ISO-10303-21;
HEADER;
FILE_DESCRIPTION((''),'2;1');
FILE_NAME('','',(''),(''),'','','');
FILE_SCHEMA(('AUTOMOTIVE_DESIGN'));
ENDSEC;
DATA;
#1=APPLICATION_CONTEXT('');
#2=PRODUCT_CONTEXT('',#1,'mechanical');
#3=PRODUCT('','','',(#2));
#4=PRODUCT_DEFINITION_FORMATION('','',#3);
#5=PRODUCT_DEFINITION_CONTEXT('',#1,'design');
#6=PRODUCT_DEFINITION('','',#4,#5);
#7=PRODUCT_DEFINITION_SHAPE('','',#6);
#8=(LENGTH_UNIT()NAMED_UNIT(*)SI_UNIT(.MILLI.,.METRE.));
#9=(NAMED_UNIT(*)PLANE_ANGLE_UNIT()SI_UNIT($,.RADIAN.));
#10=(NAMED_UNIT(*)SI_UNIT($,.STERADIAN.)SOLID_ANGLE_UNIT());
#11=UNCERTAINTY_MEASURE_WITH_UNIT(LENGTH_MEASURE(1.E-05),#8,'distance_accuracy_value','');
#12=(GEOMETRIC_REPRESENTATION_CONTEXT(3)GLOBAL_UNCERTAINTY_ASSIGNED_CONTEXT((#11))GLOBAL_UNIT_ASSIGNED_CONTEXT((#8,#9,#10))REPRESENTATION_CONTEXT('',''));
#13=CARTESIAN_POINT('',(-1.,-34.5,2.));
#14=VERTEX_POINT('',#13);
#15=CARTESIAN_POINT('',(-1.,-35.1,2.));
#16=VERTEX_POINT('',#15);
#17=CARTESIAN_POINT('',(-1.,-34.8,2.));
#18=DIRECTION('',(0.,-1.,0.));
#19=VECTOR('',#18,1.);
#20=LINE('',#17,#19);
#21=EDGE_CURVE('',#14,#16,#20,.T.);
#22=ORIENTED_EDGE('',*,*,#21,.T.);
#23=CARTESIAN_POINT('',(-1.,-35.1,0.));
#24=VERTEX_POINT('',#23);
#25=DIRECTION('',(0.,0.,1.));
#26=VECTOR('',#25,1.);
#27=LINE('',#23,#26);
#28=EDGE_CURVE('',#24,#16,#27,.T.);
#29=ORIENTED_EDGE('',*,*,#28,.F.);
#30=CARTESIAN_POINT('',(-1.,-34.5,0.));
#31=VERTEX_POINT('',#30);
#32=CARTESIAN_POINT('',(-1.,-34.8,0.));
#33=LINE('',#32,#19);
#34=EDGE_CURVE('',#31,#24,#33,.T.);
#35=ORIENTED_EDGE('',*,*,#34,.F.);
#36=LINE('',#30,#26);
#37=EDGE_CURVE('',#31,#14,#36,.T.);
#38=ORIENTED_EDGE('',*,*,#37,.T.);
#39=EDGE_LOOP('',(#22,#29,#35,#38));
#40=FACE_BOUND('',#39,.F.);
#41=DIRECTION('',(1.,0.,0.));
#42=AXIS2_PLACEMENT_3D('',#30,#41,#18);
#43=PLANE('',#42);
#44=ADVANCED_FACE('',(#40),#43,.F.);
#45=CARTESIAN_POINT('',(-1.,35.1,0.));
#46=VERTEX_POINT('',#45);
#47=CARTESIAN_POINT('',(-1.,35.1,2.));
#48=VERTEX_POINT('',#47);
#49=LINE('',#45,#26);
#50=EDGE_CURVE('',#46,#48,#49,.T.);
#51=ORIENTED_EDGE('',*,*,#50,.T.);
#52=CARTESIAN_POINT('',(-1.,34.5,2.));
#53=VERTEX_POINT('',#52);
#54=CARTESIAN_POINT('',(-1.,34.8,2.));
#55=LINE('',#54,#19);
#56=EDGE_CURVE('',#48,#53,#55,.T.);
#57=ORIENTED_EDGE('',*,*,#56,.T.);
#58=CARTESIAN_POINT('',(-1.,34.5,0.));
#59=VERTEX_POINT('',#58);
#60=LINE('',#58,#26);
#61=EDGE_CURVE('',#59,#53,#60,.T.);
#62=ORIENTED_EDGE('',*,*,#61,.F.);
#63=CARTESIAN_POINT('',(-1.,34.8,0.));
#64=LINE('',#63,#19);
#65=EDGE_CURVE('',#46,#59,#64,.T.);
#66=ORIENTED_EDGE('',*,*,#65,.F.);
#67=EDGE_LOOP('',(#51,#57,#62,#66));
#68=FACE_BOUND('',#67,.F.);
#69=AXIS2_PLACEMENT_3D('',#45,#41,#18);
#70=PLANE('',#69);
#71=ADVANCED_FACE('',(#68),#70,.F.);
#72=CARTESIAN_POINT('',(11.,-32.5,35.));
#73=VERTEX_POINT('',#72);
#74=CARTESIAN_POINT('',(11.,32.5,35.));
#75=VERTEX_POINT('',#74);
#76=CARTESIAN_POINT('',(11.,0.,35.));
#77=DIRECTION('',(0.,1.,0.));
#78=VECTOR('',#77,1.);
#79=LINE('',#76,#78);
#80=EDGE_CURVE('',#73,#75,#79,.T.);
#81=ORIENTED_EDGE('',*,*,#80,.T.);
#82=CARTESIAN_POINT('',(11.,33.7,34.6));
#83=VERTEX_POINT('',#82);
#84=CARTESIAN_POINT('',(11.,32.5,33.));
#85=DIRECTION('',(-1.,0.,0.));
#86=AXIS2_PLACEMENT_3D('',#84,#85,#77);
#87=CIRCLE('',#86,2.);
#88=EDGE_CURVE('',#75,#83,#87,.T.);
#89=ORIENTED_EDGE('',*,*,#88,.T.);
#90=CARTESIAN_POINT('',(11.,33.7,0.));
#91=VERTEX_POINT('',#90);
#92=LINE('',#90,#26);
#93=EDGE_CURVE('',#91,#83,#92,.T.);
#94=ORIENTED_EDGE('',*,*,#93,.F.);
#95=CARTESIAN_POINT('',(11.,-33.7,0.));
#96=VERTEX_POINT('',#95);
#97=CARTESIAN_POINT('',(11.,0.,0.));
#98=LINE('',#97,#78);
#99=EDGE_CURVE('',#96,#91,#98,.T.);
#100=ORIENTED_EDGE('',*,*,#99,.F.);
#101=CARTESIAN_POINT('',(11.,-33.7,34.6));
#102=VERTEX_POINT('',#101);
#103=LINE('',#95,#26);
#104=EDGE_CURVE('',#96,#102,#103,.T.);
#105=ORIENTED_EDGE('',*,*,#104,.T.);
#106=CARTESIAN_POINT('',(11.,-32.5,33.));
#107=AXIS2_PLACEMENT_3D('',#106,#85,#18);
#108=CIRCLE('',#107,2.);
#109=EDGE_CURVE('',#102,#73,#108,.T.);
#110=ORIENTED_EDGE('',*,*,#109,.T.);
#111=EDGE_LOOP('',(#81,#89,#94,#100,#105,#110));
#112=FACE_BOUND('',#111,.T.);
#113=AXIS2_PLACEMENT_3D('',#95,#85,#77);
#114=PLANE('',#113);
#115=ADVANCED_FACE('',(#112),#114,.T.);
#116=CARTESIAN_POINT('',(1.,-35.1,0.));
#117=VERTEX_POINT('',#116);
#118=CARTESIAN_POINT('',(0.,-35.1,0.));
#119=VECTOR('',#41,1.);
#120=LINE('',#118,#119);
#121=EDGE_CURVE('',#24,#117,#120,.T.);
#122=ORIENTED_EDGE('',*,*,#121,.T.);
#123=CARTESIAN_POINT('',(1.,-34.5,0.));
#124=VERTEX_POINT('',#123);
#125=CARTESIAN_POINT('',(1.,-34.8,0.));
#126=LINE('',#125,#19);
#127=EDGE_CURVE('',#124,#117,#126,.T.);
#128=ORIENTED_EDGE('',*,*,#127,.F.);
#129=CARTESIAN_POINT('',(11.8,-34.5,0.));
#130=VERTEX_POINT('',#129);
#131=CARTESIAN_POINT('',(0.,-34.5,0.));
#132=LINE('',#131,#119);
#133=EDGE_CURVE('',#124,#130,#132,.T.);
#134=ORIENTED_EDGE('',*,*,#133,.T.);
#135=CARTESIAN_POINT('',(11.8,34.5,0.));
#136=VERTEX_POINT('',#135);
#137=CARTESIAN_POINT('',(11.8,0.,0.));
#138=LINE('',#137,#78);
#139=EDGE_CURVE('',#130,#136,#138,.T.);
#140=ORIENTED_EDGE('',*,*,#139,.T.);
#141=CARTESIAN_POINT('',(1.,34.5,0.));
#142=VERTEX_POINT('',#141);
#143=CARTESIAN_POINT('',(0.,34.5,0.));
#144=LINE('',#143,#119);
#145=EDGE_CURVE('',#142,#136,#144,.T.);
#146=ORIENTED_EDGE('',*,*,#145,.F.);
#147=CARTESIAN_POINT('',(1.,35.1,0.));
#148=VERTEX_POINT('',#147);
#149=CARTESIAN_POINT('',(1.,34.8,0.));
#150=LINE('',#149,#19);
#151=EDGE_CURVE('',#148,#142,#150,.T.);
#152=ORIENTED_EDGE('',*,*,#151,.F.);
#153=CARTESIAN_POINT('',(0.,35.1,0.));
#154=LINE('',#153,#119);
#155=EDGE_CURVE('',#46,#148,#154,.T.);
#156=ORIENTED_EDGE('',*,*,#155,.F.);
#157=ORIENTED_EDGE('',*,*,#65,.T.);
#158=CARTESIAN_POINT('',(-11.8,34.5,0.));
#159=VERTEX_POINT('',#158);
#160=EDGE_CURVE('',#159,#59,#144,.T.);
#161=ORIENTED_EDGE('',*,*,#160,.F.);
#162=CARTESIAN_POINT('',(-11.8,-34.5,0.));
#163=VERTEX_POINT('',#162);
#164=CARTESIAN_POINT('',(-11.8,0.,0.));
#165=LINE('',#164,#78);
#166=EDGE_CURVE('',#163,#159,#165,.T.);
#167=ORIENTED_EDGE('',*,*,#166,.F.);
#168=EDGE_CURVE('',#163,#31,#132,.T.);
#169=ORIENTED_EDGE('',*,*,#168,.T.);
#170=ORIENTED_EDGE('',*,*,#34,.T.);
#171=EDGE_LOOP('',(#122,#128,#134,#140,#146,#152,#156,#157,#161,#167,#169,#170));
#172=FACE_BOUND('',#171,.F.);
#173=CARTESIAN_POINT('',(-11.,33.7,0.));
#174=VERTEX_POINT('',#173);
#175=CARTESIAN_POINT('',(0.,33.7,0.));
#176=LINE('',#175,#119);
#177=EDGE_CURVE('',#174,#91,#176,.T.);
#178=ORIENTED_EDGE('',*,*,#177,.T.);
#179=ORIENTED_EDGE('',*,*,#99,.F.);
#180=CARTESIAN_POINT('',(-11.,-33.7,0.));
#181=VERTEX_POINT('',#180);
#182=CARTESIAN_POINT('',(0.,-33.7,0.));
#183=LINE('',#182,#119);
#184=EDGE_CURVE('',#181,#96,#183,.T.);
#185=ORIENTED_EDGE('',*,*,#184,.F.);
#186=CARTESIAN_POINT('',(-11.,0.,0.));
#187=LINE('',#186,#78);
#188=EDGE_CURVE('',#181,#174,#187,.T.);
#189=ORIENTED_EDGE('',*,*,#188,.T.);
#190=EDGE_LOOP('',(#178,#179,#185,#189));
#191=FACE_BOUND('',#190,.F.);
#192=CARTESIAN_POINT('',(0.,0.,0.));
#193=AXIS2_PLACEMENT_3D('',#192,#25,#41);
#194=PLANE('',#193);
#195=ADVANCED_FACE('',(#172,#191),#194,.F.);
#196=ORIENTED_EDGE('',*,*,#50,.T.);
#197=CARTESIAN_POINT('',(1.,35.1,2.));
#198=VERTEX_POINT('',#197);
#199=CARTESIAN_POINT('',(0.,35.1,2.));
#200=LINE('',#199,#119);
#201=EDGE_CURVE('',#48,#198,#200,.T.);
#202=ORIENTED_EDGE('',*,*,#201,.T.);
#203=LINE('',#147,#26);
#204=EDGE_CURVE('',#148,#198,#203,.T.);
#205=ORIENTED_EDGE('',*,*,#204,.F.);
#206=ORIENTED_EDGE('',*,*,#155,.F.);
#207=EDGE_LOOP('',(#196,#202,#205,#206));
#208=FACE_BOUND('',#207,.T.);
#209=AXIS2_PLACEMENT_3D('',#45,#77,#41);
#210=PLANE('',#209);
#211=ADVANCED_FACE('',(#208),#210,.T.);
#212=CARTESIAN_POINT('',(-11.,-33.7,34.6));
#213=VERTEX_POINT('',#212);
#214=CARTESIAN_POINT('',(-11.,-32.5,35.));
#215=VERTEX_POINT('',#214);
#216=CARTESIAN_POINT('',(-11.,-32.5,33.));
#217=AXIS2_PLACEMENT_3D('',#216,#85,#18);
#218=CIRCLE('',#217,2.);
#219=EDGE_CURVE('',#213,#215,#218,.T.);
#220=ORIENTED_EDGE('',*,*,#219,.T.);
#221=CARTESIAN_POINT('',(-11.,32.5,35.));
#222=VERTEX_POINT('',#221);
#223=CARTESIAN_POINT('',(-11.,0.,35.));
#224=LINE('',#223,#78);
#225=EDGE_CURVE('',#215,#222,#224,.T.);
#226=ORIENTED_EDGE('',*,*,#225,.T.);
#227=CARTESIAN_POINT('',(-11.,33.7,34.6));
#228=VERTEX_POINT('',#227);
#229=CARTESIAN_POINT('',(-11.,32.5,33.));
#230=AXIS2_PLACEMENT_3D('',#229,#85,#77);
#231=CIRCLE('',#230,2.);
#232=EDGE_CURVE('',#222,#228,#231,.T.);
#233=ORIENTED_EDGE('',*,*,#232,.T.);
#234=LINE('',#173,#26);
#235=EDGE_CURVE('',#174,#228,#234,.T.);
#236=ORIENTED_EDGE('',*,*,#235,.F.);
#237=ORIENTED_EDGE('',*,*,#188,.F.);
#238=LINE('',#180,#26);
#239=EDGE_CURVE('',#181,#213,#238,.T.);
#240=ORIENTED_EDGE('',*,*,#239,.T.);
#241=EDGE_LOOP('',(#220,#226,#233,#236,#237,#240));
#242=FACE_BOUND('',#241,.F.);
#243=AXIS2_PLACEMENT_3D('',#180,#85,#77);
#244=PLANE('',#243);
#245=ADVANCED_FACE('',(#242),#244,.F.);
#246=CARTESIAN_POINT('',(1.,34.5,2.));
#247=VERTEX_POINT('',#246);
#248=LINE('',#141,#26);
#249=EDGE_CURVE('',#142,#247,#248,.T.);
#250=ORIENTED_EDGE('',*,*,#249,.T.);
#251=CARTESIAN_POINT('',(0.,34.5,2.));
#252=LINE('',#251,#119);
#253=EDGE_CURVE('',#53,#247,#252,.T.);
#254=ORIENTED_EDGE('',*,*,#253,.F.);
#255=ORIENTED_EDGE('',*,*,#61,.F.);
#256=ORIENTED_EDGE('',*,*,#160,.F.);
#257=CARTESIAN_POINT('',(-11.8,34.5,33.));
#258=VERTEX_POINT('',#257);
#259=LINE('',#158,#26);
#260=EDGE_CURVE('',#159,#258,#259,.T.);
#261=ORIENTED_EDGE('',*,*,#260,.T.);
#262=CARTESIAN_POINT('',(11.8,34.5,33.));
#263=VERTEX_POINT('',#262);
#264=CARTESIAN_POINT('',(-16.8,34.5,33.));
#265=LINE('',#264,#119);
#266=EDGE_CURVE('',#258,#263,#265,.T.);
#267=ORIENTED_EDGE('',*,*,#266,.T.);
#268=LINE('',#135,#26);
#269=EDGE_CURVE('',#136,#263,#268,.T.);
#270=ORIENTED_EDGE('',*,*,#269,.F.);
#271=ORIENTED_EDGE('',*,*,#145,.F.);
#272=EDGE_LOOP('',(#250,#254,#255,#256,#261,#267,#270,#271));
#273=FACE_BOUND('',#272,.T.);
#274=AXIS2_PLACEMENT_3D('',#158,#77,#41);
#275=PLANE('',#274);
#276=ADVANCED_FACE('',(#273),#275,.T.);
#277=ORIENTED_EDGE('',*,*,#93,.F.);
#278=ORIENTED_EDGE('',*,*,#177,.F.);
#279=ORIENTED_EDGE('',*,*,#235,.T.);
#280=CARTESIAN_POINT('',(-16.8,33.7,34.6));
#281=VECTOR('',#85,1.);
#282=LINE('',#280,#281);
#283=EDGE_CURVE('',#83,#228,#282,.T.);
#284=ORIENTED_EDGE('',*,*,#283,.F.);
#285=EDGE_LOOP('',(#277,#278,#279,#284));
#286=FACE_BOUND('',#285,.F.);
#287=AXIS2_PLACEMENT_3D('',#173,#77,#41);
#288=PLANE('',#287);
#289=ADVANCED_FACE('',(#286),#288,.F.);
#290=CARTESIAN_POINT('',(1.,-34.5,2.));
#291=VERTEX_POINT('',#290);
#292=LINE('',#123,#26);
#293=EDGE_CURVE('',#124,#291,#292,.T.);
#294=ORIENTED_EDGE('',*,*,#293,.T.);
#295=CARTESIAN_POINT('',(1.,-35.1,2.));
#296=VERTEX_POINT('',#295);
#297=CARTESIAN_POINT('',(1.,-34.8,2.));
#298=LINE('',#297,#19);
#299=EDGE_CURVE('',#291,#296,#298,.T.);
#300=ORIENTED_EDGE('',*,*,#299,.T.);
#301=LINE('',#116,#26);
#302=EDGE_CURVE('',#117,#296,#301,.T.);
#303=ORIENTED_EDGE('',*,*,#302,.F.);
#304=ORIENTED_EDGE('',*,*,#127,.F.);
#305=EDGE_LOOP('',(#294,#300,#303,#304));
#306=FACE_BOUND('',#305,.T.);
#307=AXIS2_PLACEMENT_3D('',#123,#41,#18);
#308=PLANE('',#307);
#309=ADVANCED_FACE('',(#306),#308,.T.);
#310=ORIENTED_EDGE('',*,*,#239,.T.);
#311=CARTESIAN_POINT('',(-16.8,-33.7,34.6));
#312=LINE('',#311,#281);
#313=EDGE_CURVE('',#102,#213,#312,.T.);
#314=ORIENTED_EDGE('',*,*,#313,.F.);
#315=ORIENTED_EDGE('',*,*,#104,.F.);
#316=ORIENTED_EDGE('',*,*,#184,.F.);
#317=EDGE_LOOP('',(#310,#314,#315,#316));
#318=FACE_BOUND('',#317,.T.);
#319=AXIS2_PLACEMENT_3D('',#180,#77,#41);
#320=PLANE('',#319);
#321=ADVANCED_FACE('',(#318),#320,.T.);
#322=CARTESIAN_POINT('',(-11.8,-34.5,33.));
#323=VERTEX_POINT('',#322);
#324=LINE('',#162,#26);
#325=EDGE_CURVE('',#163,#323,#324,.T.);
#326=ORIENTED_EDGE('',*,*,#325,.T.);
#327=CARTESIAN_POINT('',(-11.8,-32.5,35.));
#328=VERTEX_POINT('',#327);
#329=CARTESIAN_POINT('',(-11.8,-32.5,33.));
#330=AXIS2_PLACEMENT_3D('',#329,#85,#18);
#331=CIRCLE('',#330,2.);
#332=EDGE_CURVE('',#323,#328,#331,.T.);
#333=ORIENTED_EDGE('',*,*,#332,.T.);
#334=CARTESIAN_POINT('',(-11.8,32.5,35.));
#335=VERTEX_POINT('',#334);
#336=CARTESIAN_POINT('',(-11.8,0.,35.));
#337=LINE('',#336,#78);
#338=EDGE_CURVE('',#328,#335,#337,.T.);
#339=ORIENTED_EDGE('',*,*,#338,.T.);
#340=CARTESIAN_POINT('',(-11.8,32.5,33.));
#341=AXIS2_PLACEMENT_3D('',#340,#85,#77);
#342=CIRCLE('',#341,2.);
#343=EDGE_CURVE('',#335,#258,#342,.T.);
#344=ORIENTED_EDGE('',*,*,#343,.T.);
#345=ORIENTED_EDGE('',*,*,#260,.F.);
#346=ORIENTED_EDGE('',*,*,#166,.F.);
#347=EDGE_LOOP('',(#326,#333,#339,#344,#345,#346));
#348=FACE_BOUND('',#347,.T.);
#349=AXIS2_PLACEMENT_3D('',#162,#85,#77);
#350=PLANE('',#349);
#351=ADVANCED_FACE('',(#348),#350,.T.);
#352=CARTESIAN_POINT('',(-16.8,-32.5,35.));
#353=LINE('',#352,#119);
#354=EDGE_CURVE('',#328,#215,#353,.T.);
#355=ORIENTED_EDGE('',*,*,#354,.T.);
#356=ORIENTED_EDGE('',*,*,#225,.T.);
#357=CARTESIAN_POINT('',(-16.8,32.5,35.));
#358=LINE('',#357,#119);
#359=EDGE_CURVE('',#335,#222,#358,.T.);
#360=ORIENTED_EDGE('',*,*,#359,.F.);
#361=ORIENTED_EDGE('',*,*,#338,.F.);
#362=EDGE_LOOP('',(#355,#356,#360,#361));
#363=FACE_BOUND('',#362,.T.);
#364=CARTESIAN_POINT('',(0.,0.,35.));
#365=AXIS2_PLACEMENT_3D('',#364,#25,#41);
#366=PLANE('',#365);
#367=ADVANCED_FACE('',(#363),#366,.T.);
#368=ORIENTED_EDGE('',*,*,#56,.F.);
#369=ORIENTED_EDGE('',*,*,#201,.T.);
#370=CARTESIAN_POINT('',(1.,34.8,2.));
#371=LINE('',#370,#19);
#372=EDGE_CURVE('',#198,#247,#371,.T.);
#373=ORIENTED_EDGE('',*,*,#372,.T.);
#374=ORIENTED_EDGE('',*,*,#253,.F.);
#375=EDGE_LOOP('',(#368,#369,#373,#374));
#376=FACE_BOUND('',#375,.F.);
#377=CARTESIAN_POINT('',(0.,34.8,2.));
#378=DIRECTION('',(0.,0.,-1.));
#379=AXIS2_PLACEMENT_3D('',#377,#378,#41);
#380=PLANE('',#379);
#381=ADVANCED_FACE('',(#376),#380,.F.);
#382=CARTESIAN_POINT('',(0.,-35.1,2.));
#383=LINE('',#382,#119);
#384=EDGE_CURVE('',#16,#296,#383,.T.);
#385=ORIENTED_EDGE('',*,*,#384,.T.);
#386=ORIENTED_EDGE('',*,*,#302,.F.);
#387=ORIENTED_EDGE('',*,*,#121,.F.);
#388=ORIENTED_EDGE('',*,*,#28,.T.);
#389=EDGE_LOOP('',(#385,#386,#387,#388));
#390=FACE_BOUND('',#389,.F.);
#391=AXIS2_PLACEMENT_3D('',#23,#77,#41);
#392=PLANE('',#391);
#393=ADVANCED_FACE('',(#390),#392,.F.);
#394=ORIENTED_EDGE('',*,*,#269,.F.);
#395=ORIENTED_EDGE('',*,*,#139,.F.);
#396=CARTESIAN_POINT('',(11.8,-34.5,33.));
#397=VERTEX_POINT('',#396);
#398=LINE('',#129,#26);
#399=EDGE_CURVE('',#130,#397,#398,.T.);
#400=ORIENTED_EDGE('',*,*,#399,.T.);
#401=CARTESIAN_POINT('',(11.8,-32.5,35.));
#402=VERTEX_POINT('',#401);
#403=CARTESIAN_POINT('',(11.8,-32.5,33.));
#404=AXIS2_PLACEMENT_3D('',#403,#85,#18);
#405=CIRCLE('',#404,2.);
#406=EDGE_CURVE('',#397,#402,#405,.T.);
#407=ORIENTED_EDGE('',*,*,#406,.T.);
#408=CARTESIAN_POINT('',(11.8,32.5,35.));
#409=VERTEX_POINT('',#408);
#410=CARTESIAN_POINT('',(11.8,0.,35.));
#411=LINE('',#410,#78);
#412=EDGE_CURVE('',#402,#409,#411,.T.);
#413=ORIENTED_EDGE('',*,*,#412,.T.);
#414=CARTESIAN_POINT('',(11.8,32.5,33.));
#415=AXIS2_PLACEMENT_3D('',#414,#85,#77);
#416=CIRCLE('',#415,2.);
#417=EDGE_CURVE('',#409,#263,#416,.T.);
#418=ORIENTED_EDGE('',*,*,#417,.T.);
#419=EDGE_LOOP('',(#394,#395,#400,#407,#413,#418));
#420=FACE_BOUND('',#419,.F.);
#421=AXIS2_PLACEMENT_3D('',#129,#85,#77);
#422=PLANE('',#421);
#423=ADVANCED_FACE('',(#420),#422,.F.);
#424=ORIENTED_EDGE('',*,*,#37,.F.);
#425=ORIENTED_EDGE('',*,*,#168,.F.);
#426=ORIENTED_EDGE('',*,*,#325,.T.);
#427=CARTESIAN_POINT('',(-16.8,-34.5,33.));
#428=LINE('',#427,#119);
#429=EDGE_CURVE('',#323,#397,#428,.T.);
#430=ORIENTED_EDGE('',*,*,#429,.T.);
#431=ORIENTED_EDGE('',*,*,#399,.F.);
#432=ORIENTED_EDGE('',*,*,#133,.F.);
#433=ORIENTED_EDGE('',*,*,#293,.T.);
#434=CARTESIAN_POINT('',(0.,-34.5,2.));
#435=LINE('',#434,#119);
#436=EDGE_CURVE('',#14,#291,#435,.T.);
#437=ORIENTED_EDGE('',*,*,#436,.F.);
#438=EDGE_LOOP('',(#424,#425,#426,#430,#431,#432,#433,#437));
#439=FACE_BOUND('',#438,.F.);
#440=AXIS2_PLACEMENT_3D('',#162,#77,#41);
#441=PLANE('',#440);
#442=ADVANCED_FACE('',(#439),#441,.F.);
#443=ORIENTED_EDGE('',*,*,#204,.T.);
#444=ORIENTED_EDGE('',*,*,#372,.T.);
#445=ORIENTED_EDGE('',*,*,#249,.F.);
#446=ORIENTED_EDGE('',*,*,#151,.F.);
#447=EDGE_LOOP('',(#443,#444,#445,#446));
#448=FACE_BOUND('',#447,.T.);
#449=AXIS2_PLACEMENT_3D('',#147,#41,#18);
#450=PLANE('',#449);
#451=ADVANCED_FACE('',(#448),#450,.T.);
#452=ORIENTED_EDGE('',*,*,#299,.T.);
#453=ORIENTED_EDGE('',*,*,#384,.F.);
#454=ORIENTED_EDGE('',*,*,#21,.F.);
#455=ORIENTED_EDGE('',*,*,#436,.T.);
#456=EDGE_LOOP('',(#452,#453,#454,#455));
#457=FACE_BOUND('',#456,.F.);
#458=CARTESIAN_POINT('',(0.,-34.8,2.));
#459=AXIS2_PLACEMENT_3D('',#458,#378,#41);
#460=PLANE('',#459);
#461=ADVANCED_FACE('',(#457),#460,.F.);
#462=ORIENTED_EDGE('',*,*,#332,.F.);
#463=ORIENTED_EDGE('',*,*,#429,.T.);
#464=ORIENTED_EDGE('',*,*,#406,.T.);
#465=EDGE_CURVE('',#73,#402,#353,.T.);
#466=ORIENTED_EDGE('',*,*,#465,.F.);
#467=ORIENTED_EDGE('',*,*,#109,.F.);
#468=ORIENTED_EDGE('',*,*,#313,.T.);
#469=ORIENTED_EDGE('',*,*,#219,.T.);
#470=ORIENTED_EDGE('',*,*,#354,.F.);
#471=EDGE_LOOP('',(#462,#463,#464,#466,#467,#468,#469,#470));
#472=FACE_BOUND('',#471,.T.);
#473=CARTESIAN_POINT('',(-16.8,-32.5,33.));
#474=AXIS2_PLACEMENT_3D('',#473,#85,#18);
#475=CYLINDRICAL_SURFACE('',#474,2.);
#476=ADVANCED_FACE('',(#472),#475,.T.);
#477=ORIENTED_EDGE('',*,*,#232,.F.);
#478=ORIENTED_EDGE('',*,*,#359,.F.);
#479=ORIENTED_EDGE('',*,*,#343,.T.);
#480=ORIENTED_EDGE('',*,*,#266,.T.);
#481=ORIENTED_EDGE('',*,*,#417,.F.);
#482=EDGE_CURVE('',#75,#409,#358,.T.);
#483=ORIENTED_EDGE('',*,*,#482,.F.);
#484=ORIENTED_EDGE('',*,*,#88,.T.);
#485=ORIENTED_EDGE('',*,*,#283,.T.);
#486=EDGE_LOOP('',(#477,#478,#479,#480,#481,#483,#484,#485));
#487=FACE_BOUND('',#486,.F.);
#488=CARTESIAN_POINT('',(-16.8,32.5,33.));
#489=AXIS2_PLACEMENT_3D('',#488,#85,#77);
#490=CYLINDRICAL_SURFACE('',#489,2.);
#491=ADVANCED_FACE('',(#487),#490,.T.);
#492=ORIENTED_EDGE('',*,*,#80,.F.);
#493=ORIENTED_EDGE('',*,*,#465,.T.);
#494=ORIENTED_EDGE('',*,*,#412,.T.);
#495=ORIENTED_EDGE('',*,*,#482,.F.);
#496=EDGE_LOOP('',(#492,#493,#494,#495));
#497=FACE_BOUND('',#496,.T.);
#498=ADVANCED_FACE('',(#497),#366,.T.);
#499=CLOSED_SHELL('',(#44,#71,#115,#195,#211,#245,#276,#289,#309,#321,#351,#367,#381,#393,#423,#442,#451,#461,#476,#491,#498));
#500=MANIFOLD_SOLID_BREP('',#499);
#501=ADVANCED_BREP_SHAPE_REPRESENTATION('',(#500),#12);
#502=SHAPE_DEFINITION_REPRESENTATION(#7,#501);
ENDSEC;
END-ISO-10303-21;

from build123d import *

# Parameters (mm, degrees)
F0_W        = 23.6
F0_H        = 69
F0_W_2      = 22
F0_H_2      = 67.4
F1_DEPTH    = 35
F2_T1_DEPTH = 33.6
F3_W        = 2
F3_H        = 0.6
F4_DEPTH    = 2


# Not quite as in the source:
# - a fillet or chamfer that OpenCascade refuses, or shapes differently, is made with other operations: its cross-section is extruded or revolved along the edge and cut away or added


with BuildPart() as f1:
    # F0 (on Top) → F1 (new body)
    with BuildSketch(Plane.XY):
        Rectangle(F0_W, F0_H)
        Rectangle(F0_W_2, F0_H_2, mode=Mode.SUBTRACT)
    extrude(amount=F1_DEPTH)

    # F2: fillet of radius 2 on 2 edges, made by hand

    # F2_s2 → F2_t1 (cut)
    with BuildSketch(Plane.YZ.offset(-16.8)):
        with BuildLine():
            ThreePointArc((-34.5, 33), (-33.9142135624, 34.4142135624), (-32.5, 35))
            Line((-32.5, 35), (-34.5, 35))
            Line((-34.5, 35), (-34.5, 33))
        make_face()
        with BuildLine():
            ThreePointArc((34.5, 33), (33.9142135624, 34.4142135624), (32.5, 35))
            Line((32.5, 35), (34.5, 35))
            Line((34.5, 35), (34.5, 33))
        make_face()
    extrude(amount=F2_T1_DEPTH, mode=Mode.SUBTRACT)

    # F3 (on face) → F4 (join)
    with BuildSketch(Plane(origin=(0, 0, 0), x_dir=(1, 0, 0), z_dir=(0, 0, -1))):
        with Locations((0, 34.8)):
            Rectangle(F3_W, F3_H)
        with Locations((0, -34.8)):
            Rectangle(F3_W, F3_H)
    extrude(amount=-F4_DEPTH)


solid = f1.part
